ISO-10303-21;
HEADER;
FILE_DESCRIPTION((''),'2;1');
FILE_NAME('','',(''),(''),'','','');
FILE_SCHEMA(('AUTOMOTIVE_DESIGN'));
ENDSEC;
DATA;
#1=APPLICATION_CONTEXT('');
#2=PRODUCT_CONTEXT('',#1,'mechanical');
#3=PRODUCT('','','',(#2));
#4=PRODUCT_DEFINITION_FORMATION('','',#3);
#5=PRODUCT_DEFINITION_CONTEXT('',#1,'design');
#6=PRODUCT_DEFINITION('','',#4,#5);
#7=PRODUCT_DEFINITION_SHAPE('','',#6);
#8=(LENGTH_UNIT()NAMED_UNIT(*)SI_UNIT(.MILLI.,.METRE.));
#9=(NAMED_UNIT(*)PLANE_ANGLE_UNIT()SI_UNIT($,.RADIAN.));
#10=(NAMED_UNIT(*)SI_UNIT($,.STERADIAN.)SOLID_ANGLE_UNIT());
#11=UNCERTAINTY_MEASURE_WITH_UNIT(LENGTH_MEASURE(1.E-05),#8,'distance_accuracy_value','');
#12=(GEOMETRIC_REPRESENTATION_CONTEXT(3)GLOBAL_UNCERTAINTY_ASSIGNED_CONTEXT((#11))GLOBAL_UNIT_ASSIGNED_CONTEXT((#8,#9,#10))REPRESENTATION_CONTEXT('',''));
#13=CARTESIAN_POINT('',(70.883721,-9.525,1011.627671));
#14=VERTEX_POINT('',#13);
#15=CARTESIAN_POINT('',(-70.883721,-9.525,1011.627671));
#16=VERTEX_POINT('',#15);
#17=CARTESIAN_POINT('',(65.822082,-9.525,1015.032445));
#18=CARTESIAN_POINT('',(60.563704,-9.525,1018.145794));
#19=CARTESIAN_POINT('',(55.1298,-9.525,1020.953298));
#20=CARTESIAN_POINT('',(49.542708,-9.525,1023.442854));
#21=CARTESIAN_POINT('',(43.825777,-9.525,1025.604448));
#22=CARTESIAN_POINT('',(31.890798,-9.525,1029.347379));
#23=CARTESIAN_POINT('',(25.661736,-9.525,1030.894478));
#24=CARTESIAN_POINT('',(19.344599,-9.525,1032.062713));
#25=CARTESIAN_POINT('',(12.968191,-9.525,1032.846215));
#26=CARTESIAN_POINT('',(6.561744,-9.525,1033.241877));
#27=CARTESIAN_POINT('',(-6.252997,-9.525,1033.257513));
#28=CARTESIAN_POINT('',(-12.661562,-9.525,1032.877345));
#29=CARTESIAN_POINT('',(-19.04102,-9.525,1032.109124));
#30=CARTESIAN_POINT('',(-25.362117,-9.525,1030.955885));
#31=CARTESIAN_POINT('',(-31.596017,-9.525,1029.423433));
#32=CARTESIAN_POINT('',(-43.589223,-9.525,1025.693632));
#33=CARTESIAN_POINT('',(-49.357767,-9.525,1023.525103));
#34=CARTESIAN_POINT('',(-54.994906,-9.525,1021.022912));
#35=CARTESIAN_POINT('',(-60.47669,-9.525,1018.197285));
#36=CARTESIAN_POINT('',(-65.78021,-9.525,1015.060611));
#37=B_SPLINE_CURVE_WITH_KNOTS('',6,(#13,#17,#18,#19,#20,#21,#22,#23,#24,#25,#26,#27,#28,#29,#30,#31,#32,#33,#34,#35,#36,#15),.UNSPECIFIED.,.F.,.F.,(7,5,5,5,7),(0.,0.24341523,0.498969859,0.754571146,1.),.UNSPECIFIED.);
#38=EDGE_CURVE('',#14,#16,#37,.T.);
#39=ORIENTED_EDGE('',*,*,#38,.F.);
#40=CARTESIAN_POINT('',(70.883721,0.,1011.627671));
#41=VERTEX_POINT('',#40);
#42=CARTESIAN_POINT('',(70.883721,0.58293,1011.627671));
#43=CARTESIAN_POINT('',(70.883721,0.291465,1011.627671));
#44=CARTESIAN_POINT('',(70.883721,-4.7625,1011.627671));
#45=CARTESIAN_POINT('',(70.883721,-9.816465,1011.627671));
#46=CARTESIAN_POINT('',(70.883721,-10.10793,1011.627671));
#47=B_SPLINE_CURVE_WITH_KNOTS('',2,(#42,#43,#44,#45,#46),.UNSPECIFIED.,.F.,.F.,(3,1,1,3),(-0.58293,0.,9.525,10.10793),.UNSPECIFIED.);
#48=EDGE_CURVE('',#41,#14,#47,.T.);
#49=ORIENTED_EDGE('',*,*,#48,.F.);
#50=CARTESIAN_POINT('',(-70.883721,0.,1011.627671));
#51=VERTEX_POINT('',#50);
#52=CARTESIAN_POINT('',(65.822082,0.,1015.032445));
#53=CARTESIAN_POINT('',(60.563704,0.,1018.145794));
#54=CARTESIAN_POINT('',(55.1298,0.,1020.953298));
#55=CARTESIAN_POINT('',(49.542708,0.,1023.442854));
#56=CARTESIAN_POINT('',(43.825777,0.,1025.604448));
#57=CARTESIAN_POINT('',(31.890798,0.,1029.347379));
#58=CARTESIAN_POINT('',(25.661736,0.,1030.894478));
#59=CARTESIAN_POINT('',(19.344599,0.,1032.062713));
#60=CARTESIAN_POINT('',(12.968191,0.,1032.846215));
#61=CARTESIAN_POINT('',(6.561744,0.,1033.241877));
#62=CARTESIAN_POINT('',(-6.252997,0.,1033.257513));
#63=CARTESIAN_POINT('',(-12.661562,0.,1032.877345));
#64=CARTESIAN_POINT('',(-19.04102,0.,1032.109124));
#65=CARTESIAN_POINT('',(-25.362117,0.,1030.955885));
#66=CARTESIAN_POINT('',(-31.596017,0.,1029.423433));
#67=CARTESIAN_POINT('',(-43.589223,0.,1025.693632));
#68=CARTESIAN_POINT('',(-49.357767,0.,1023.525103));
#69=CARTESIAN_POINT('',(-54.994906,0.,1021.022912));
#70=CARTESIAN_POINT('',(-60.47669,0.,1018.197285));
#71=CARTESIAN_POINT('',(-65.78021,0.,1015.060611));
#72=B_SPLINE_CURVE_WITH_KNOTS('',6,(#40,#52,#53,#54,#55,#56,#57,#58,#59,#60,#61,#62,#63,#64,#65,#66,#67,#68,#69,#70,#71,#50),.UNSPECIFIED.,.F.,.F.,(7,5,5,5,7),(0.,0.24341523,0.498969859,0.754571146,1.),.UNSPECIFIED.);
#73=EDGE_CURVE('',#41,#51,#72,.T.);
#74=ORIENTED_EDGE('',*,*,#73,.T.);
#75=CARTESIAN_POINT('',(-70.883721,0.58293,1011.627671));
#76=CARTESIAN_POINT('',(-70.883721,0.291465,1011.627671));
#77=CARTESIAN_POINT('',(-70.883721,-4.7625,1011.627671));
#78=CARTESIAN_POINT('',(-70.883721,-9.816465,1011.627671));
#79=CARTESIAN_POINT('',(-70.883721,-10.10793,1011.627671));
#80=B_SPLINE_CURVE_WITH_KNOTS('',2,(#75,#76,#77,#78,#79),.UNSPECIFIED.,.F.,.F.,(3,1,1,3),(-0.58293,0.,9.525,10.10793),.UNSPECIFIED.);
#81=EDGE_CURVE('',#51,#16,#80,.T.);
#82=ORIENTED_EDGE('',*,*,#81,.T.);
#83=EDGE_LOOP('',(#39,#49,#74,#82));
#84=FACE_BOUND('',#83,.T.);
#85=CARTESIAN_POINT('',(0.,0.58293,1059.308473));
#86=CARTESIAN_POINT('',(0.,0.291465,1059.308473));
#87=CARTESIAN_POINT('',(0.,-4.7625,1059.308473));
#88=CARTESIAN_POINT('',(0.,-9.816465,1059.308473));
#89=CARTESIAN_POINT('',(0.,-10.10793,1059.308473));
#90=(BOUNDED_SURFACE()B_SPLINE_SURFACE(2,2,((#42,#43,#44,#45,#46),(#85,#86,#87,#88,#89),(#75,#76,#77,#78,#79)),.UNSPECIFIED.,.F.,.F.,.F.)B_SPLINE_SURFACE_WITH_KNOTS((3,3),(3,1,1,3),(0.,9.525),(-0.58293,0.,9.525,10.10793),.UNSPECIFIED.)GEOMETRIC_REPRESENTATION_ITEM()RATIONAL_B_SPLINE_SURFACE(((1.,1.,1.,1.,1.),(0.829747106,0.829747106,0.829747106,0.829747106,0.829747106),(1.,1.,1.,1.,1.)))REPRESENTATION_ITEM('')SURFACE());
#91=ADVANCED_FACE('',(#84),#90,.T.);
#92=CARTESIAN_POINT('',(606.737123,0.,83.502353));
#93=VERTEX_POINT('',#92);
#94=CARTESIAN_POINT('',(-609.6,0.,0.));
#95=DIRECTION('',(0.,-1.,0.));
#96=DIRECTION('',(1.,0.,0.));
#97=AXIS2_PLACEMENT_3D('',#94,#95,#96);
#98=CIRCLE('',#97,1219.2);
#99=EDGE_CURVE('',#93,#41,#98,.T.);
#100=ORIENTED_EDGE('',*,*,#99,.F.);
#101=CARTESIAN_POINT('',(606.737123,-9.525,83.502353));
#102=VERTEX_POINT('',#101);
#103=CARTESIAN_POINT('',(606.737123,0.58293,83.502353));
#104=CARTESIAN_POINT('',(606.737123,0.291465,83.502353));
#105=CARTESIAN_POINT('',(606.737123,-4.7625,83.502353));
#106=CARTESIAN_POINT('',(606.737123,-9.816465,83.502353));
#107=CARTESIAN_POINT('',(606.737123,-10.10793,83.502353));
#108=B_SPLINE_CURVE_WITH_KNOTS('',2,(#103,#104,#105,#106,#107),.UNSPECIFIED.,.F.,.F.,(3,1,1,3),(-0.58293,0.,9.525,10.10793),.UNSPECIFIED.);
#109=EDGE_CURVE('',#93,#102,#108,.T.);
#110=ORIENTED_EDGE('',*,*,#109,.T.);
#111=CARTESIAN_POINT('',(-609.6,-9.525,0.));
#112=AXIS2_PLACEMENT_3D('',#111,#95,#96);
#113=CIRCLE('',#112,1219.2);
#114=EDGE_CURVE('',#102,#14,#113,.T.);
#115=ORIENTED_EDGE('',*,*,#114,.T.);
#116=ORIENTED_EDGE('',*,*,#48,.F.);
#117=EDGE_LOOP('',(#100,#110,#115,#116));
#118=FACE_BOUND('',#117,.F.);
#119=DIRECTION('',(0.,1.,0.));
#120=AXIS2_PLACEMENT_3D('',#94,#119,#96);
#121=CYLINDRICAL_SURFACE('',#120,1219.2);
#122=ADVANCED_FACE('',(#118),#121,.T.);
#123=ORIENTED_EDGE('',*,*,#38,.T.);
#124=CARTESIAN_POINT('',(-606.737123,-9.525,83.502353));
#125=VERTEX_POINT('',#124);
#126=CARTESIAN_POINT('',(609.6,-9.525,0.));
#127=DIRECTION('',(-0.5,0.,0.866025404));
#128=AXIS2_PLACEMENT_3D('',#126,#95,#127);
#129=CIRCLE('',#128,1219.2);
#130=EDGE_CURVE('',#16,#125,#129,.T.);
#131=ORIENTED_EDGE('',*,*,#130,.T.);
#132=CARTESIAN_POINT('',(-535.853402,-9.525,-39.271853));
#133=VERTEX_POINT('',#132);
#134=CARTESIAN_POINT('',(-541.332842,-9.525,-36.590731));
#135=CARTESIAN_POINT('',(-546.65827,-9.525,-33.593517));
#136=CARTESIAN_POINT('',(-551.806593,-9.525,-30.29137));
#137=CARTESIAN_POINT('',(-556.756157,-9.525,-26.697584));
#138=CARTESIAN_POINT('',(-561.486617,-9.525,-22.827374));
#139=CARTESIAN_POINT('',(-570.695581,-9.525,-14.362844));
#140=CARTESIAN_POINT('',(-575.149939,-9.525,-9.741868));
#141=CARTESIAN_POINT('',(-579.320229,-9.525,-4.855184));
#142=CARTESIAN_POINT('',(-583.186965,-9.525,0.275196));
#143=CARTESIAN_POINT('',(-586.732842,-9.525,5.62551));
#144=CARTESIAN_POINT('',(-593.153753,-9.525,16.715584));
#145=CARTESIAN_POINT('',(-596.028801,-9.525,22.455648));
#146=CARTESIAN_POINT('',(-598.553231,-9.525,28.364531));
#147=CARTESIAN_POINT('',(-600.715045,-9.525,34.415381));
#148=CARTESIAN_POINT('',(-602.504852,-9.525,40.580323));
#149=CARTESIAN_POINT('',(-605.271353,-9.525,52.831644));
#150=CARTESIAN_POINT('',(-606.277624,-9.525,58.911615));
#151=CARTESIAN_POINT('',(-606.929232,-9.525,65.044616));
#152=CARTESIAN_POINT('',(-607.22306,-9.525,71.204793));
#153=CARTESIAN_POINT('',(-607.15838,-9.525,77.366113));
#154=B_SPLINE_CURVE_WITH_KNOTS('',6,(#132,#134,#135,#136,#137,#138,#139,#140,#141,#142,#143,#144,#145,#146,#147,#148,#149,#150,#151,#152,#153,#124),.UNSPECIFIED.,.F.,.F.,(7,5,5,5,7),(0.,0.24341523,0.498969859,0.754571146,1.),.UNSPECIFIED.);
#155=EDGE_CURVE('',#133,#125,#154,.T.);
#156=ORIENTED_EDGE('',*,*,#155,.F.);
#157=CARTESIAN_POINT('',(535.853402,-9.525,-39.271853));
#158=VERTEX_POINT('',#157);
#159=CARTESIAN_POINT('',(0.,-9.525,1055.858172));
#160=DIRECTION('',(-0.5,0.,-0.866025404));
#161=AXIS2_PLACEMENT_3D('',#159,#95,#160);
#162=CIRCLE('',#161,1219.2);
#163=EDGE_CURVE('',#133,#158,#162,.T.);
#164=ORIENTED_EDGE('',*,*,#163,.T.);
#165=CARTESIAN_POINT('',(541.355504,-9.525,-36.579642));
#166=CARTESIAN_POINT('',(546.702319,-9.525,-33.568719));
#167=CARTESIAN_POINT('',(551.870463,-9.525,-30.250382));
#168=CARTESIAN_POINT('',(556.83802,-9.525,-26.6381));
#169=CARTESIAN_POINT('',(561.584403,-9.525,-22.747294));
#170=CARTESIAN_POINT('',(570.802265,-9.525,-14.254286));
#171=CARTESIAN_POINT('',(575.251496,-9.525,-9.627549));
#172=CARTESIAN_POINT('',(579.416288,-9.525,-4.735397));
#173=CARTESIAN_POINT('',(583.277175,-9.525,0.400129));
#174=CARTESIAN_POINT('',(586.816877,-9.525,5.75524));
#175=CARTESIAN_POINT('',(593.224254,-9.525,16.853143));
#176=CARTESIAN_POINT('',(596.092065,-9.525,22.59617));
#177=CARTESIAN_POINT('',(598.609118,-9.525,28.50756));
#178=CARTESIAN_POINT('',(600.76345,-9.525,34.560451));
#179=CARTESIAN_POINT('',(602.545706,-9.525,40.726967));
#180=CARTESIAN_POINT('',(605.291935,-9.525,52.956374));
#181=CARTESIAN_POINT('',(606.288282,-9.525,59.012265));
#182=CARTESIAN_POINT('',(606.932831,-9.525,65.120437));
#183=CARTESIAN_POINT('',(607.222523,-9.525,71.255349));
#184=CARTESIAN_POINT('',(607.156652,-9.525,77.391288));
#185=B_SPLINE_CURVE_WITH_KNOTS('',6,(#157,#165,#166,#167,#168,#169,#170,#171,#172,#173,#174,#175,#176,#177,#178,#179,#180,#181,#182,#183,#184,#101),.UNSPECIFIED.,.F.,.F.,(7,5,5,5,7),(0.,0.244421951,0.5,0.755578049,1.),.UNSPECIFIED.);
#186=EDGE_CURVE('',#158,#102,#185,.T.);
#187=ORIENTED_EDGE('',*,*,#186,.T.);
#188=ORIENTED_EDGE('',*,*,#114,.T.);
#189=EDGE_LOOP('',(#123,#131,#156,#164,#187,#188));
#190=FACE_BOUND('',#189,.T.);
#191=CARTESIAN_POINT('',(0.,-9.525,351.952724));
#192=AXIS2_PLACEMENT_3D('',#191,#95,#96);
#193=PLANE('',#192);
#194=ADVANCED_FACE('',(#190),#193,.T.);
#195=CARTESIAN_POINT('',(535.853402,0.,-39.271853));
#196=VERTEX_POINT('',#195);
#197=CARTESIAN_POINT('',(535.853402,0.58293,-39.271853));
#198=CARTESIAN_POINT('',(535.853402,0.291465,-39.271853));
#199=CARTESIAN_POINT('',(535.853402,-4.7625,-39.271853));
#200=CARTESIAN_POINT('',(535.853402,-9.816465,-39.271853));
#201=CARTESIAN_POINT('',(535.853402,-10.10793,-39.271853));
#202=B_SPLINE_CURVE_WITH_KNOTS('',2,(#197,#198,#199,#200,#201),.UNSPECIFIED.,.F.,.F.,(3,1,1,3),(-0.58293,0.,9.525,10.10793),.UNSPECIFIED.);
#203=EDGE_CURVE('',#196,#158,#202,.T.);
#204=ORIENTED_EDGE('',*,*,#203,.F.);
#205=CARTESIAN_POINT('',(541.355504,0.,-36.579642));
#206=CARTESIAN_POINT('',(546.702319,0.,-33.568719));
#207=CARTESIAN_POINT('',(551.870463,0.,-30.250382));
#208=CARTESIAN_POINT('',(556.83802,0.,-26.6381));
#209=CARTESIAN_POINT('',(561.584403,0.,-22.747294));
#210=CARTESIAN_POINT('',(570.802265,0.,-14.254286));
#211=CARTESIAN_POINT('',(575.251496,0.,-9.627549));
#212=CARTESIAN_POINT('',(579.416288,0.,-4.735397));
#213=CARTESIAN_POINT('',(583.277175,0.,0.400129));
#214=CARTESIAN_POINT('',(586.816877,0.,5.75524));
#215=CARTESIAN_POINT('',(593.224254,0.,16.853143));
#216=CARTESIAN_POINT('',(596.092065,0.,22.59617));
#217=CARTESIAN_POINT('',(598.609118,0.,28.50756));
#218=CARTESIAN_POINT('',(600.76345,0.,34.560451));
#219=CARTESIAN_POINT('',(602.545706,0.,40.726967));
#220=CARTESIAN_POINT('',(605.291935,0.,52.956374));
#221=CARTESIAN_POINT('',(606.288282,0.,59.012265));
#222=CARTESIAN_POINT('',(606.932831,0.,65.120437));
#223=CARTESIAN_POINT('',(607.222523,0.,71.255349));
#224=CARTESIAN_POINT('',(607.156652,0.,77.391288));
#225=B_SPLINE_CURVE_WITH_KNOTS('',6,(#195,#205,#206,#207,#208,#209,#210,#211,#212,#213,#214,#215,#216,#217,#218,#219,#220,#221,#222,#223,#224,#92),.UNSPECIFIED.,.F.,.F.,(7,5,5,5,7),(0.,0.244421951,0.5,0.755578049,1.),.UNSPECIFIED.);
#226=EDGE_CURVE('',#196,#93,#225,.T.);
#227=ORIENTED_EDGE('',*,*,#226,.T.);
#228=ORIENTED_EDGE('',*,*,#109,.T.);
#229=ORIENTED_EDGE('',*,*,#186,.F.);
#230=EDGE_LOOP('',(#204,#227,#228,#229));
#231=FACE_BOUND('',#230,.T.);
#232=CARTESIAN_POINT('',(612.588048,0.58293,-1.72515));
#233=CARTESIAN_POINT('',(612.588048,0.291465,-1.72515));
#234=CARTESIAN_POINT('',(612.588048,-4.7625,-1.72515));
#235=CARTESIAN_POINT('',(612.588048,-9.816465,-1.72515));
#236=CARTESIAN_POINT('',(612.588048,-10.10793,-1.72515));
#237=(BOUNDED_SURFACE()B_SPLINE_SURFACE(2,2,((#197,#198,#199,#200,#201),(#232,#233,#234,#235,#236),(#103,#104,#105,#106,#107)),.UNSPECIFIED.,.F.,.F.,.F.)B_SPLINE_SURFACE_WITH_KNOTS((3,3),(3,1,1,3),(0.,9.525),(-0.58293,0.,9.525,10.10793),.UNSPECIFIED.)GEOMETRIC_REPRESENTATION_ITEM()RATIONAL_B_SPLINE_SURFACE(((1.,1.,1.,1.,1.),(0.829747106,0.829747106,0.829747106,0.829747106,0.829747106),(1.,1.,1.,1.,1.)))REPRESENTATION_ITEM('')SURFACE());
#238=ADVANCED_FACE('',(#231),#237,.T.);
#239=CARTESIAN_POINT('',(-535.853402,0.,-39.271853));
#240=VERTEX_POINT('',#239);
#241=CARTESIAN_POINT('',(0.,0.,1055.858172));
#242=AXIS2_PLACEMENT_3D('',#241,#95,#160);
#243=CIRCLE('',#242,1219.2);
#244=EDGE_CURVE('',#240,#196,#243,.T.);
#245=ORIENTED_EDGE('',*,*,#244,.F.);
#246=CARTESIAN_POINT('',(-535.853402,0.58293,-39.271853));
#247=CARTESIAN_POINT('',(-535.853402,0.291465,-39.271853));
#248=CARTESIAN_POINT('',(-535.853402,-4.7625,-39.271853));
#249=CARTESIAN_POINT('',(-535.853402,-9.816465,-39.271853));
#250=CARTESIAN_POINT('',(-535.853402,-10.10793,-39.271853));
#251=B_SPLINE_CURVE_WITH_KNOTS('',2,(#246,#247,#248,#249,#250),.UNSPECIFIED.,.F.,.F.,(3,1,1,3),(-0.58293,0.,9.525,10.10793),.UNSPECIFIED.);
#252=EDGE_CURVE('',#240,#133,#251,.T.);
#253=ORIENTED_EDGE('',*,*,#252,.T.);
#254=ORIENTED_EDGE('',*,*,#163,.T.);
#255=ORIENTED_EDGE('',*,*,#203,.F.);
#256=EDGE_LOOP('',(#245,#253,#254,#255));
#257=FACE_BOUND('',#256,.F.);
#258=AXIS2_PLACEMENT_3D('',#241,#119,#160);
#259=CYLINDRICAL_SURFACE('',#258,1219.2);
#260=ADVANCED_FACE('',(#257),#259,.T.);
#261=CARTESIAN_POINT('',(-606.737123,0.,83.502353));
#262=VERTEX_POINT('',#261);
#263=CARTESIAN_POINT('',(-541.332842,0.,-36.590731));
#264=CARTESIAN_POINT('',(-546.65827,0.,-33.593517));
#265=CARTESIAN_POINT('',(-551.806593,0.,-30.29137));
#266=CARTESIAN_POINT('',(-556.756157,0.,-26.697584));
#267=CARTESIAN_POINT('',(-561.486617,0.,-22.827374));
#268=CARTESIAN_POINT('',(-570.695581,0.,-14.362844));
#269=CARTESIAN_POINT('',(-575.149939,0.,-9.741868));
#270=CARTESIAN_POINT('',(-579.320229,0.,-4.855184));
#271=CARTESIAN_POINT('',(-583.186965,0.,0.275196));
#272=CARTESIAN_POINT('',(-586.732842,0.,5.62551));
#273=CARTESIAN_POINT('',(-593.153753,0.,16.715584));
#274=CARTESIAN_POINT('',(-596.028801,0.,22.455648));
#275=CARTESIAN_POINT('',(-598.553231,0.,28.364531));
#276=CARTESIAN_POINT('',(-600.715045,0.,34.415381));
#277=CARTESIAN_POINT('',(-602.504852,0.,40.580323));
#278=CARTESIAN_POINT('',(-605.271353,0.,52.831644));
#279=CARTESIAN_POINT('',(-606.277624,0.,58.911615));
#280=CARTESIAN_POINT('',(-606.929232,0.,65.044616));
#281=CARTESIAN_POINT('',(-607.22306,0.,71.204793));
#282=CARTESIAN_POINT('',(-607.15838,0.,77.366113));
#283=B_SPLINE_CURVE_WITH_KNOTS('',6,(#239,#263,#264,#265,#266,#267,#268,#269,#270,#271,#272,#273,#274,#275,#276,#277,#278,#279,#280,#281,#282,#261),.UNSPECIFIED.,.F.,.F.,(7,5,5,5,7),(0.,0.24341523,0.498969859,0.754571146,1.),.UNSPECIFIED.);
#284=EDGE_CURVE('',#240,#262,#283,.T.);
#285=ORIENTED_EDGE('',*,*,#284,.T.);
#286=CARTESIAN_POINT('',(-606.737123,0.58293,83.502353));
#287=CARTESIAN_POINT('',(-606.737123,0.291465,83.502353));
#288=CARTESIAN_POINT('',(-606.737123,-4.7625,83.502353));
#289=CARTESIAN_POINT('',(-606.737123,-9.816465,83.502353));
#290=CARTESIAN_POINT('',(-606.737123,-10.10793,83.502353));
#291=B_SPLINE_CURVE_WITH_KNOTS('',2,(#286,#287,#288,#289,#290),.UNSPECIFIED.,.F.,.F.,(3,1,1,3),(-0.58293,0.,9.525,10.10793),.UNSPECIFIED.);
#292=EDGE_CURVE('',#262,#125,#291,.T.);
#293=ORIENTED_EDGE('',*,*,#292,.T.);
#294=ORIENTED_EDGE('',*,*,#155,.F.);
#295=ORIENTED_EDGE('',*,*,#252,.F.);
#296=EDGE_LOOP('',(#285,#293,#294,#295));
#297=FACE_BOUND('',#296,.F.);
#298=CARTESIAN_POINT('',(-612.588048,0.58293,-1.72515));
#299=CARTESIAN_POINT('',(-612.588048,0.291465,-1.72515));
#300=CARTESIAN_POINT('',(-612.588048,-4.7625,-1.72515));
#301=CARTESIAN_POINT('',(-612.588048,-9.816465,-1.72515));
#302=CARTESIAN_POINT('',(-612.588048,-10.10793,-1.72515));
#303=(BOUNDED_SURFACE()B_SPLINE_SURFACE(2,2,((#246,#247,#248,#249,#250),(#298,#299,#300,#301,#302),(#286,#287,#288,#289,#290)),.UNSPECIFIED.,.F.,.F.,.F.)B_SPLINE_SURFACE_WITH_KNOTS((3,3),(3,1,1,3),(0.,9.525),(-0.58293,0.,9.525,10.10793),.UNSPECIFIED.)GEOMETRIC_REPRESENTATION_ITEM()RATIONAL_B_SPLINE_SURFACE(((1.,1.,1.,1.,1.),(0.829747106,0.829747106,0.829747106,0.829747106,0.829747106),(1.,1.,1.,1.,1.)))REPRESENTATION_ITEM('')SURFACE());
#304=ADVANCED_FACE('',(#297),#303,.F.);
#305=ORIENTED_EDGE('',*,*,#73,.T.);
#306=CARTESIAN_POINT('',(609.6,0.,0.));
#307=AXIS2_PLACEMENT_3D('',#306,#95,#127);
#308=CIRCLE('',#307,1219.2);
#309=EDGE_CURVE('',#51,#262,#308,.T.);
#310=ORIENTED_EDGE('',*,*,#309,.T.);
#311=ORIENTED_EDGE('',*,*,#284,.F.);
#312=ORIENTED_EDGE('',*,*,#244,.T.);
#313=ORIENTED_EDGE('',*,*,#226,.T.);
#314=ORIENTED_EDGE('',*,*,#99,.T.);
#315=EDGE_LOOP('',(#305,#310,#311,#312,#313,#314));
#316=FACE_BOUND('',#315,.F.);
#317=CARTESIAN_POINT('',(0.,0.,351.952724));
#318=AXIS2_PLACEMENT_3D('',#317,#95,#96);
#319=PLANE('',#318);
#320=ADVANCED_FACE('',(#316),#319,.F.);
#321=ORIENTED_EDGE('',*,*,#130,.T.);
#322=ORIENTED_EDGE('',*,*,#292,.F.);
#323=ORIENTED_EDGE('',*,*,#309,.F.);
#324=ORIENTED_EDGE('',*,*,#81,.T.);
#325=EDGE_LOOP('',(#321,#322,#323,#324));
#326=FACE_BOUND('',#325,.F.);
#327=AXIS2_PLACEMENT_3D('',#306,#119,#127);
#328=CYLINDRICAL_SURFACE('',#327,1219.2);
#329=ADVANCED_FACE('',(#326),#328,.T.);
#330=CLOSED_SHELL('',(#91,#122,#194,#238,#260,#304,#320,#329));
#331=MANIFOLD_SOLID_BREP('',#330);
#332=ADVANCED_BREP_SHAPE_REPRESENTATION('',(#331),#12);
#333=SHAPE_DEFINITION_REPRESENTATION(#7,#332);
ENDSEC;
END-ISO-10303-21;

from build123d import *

# Parameters (mm, degrees)
F1_DEPTH = 9.525
F2_R     = 127


with BuildPart() as f1:
    # F0 (on Front) → F1 (new body)
    with BuildSketch(Plane.XZ):
        with BuildLine():
            ThreePointArc((-609.6, 0), (0, -163.341827706), (609.6, 0))
            ThreePointArc((609.6, 0), (446.258172294, 609.6), (0, 1055.858172294))
            ThreePointArc((0, 1055.858172294), (-446.258172294, 609.6), (-609.6, 0))
        make_face()
    extrude(amount=F1_DEPTH)

    # F2
    f2_edges = [f1.edges().sort_by_distance(p)[0] for p in [
        (0, -4.7625, 1055.858172),
        (-609.6, -4.7625, 0),
        (609.6, -4.7625, 0),
    ]]
    fillet(f2_edges, radius=F2_R)


solid = f1.part
